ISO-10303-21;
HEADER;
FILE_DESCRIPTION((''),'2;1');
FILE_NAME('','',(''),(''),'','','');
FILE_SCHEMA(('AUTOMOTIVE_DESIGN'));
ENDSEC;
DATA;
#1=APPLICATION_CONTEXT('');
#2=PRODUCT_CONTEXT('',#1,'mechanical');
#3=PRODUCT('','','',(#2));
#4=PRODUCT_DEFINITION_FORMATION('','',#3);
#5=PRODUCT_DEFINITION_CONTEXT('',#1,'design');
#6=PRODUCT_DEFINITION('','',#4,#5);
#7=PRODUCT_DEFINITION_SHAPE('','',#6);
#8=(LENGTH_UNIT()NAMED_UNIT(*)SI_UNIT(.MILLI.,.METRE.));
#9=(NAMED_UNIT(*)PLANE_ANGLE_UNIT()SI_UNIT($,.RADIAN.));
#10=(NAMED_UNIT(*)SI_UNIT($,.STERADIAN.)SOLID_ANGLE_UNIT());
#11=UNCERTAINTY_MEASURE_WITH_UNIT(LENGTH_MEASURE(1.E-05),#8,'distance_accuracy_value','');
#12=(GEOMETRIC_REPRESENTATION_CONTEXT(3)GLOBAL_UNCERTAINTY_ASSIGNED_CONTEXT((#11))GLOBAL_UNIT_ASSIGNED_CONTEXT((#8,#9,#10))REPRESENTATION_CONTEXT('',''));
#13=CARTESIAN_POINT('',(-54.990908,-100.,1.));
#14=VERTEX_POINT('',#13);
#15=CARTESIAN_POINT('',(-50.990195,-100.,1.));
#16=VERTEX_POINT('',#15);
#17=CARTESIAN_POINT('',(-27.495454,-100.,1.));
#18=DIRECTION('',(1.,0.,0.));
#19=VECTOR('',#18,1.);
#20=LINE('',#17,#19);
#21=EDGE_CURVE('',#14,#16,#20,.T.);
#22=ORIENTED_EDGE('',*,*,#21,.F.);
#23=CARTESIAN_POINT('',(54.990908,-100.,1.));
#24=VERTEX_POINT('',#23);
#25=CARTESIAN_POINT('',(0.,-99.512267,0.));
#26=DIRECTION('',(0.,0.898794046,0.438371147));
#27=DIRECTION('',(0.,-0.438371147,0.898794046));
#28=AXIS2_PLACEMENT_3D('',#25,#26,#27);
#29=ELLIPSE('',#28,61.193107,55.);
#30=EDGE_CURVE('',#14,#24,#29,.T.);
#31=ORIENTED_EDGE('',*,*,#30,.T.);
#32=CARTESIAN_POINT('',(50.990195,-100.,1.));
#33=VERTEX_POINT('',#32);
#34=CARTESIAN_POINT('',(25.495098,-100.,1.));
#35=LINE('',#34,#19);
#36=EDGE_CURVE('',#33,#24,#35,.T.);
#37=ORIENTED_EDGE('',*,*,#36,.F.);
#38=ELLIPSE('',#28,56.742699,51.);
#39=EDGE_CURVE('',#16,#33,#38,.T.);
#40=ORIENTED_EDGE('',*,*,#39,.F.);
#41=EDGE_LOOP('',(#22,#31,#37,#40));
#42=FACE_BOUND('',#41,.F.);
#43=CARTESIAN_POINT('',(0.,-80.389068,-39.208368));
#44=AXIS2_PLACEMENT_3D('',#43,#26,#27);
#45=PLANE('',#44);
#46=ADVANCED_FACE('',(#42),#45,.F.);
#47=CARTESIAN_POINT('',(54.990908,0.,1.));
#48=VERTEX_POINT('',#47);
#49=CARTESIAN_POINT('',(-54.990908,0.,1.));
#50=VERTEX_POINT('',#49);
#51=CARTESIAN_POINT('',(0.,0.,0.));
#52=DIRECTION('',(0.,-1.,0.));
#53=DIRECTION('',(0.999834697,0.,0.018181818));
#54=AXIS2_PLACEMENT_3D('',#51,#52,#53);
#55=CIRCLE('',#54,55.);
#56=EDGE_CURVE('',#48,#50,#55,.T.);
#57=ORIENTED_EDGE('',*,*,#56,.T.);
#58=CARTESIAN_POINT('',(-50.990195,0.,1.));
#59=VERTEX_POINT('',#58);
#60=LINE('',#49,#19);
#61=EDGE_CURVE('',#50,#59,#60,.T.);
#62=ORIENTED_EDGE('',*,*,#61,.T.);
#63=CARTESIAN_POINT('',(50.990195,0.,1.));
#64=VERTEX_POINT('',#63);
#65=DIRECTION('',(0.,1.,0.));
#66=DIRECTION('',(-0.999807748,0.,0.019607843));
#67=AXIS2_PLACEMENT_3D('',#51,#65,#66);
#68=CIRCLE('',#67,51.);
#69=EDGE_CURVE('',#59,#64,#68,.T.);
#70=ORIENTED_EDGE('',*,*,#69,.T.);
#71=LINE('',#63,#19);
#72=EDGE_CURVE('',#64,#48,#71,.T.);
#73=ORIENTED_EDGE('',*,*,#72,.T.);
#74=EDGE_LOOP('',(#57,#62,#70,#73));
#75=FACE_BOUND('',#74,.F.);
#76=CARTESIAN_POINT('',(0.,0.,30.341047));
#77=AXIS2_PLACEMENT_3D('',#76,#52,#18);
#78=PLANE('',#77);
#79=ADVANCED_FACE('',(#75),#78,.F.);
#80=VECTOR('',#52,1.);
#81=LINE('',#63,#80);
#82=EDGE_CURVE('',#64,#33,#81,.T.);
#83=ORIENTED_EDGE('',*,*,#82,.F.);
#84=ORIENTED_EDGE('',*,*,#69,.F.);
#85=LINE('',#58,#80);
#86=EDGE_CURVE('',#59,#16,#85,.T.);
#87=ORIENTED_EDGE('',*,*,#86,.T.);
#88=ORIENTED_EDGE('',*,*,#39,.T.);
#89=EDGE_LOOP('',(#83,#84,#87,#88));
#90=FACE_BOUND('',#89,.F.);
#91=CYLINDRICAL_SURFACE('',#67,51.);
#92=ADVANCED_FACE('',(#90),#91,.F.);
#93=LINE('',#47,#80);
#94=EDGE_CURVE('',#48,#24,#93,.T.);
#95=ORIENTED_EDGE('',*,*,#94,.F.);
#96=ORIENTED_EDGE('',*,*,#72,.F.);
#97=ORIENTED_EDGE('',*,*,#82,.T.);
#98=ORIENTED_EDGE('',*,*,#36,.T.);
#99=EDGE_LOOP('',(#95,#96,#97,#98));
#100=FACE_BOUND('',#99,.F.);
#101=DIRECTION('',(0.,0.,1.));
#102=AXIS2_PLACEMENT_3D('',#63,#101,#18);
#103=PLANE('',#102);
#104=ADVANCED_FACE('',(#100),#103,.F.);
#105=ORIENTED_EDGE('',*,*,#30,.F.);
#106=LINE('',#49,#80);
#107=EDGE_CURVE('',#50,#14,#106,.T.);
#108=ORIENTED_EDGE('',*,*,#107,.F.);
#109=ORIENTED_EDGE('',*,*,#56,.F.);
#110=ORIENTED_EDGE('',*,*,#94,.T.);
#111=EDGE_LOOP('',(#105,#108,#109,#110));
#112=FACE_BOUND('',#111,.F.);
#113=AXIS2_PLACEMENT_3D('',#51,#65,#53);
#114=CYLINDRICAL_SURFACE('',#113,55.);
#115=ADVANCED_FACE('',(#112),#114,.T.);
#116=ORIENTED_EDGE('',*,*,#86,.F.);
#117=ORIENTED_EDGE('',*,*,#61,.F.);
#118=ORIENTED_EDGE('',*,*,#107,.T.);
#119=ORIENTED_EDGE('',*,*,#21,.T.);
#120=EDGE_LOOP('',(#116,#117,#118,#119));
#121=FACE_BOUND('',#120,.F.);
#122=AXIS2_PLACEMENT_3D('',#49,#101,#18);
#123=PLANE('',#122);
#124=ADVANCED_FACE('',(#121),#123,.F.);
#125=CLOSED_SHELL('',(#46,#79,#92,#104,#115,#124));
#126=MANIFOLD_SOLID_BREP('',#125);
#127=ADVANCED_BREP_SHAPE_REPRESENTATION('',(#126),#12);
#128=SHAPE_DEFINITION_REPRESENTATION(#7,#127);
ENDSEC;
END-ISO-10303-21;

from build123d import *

# Parameters (mm, degrees)
F1_DEPTH = 127
F5_REACH = 149.52346714


with BuildPart() as f1:
    # F0 (on Front) → F1 (new body)
    with BuildSketch(Plane.XZ):
        with BuildLine():
            Line((50.9901951359, 1), (54.9909083395, 1))
            ThreePointArc((54.9909083395, 1), (0, 55), (-54.9909083395, 1))
            Line((-54.9909083395, 1), (-50.9901951359, 1))
            ThreePointArc((-50.9901951359, 1), (0, 51), (50.9901951359, 1))
        make_face()
    extrude(amount=F1_DEPTH)

    f5_end = Plane(origin=(0, -80.3890683895, -39.208368418), x_dir=(0, -0.4383711468, 0.8987940463), z_dir=(0, 0.8987940463, 0.4383711468))
    # F1_face (on face) → F5 (cut, up to a plane its end follows)
    with BuildSketch(Plane(origin=(0, -127, 34.1612155921), x_dir=(1, 0, 0), z_dir=(0, -1, 0))):
        with BuildLine():
            Line((50.9901951359, -33.1612155921), (54.9909083395, -33.1612155921))
            ThreePointArc((54.9909083395, -33.1612155921), (0, 20.8387844079), (-54.9909083395, -33.1612155921))
            Line((-54.9909083395, -33.1612155921), (-50.9901951359, -33.1612155921))
            ThreePointArc((-50.9901951359, -33.1612155921), (0, 16.8387844079), (50.9901951359, -33.1612155921))
        make_face()
    f5_long = extrude(amount=-F5_REACH, mode=Mode.PRIVATE)
    add(split(f5_long, bisect_by=f5_end, keep=Keep.BOTTOM, mode=Mode.PRIVATE), mode=Mode.SUBTRACT)


solid = f1.part
